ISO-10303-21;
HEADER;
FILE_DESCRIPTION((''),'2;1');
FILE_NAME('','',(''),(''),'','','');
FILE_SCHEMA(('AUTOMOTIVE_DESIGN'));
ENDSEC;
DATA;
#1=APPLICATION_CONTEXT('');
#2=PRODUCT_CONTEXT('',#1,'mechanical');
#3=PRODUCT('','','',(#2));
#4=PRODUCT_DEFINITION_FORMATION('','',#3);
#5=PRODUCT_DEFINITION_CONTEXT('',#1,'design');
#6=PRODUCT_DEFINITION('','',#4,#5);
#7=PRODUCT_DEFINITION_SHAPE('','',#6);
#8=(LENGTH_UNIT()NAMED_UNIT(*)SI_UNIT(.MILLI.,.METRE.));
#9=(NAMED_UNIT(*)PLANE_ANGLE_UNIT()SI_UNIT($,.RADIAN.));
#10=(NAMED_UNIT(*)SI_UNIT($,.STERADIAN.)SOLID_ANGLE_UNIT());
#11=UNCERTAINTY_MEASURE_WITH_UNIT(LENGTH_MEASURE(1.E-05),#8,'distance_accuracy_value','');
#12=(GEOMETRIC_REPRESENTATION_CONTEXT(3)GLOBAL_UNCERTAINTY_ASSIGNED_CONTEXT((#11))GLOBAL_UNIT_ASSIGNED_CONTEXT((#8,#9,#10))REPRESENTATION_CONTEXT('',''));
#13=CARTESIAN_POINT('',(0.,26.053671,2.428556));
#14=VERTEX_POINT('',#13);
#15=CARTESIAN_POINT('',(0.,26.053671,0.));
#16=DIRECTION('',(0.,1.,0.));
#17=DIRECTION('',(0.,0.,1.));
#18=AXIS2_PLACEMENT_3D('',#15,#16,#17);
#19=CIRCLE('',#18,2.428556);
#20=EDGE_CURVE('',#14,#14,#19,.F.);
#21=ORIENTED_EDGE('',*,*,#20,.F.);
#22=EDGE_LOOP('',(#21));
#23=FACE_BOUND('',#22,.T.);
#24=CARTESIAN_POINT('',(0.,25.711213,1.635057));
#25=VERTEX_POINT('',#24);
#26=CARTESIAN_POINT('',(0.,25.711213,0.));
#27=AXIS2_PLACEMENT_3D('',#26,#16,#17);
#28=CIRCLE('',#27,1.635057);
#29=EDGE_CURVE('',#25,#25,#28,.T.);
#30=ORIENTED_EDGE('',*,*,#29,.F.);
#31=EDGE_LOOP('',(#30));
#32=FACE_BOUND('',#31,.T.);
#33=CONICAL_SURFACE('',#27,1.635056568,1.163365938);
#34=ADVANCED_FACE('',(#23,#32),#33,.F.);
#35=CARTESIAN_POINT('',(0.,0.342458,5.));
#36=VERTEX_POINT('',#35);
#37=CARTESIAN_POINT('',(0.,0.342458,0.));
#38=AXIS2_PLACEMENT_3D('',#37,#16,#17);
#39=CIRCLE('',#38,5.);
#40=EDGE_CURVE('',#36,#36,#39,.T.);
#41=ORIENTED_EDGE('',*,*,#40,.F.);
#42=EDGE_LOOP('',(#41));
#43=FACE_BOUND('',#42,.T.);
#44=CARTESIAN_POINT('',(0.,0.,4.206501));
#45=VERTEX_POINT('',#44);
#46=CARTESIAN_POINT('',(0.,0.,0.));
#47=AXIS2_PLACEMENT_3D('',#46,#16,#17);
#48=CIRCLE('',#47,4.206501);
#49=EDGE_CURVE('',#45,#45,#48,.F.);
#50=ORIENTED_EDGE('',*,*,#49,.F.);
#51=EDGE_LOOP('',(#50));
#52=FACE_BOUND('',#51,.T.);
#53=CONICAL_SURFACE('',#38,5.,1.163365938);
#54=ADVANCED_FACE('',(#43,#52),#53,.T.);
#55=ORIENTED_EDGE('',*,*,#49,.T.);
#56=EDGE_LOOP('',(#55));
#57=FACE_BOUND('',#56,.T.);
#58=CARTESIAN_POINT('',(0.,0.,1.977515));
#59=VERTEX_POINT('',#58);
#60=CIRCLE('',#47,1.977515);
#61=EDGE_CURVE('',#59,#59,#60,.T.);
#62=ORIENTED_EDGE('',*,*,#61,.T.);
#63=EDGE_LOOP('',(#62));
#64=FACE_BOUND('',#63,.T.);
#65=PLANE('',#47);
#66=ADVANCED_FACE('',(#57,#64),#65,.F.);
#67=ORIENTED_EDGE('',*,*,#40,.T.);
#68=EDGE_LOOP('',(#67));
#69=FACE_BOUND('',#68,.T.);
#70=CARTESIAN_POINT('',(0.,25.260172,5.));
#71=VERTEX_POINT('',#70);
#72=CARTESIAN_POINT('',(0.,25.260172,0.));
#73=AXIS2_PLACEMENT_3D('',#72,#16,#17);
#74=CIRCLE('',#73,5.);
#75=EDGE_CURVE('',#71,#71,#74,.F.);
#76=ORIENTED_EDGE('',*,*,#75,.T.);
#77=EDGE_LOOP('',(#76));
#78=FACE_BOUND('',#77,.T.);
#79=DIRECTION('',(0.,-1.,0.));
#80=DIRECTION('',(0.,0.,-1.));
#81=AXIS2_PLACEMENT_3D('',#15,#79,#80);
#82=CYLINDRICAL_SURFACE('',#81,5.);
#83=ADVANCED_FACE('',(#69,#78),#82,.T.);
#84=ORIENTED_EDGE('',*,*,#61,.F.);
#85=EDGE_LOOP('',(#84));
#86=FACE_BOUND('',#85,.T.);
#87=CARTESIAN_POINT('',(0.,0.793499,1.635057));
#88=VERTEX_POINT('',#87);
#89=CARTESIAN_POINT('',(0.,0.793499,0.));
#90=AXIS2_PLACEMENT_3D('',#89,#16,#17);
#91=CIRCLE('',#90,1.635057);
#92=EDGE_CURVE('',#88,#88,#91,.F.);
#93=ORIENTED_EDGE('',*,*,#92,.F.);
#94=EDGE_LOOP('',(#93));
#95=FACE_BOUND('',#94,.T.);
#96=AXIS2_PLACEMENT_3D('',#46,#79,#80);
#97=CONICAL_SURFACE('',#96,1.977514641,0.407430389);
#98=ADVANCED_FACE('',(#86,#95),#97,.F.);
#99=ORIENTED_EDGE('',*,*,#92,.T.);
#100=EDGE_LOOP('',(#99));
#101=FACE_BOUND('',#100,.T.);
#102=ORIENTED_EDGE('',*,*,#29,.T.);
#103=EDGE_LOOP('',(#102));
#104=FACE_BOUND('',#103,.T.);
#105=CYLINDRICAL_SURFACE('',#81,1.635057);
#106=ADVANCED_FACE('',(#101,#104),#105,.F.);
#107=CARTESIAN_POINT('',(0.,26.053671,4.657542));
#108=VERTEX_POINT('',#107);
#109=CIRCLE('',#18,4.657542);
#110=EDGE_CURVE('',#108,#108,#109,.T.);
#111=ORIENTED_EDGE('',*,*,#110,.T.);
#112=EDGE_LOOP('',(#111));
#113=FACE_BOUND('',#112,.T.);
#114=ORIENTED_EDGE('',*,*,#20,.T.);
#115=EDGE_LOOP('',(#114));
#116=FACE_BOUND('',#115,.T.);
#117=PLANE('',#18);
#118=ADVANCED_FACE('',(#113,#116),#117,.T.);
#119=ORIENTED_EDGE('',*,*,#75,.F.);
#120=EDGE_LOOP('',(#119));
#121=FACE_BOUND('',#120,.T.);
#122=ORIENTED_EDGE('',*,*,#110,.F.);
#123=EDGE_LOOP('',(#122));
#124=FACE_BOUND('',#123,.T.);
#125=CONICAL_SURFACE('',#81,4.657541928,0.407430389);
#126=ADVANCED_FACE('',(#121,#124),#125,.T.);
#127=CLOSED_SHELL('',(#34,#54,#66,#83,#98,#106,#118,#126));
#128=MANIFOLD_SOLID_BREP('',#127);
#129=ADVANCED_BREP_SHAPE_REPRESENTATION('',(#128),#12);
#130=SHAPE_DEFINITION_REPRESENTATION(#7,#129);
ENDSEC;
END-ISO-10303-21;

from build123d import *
from OCP.BRepFilletAPI import BRepFilletAPI_MakeChamfer

# Parameters (mm, degrees)
SKETCH1_R           = 5
BOSS_EXTRUDE1_DEPTH = 26.053671458
SKETCH2_R           = 1.635056568
CUT_EXTRUDE1_DEPTH  = 27.996181145
CHAMFER1_SIZE       = 0.793499241
CHAMFER1_SIZE2      = 0.342458072


with BuildPart() as part:
    # Sketch1 → Boss-Extrude1 (new body)
    with BuildSketch(Plane(origin=(0, 0, 0), x_dir=(1, 0, 0), z_dir=(0, 1, 0))):
        Circle(SKETCH1_R)
    extrude(amount=BOSS_EXTRUDE1_DEPTH)

    # Sketch2 → Cut-Extrude1 (cut, through all)
    with BuildSketch(Plane(origin=(0, 0, 0), x_dir=(1, 0, 0), z_dir=(0, 1, 0))):
        Circle(SKETCH2_R)
    extrude(amount=CUT_EXTRUDE1_DEPTH, mode=Mode.SUBTRACT)

    # Chamfer1: one chamfer whose edges measure the first distance from different faces: ONE call of the kernel's chamfer builder (chamfer() names one face for all edges)
    chamfer1_edges_1 = [part.edges().sort_by_distance(p)[0] for p in [
        (-1.635056568, 26.053671458, 0),
    ]]
    chamfer1_side_1 = [part.faces().sort_by_distance(p)[0] for p in [
        (-4.858578644, 26.053671458, 0),
    ]]
    chamfer1_edges_2 = [part.edges().sort_by_distance(p)[0] for p in [
        (-1.635056568, 0, 0),
    ]]
    chamfer1_side_2 = [part.faces().sort_by_distance(p)[0] for p in [
        (-1.635056568, 13.026835729, 0),
    ]]
    chamfer1_edges_3 = [part.edges().sort_by_distance(p)[0] for p in [
        (-5, 0, 0),
    ]]
    chamfer1_side_3 = [part.faces().sort_by_distance(p)[0] for p in [
        (-4.858578644, 0, 0),
    ]]
    chamfer1_edges_4 = [part.edges().sort_by_distance(p)[0] for p in [
        (-5, 26.053671458, 0),
    ]]
    chamfer1_side_4 = [part.faces().sort_by_distance(p)[0] for p in [
        (-5, 13.026835729, 0),
    ]]
    chamfer1 = BRepFilletAPI_MakeChamfer(part.part.solid().wrapped)
    for e in chamfer1_edges_1:
        chamfer1.Add(CHAMFER1_SIZE, CHAMFER1_SIZE2, e.wrapped, chamfer1_side_1[0].wrapped)  # the first distance lies on this face
    for e in chamfer1_edges_2:
        chamfer1.Add(CHAMFER1_SIZE, CHAMFER1_SIZE2, e.wrapped, chamfer1_side_2[0].wrapped)  # the first distance lies on this face
    for e in chamfer1_edges_3:
        chamfer1.Add(CHAMFER1_SIZE, CHAMFER1_SIZE2, e.wrapped, chamfer1_side_3[0].wrapped)  # the first distance lies on this face
    for e in chamfer1_edges_4:
        chamfer1.Add(CHAMFER1_SIZE, CHAMFER1_SIZE2, e.wrapped, chamfer1_side_4[0].wrapped)  # the first distance lies on this face
    add(Compound.cast(chamfer1.Shape()), mode=Mode.REPLACE)


solid = part.part
